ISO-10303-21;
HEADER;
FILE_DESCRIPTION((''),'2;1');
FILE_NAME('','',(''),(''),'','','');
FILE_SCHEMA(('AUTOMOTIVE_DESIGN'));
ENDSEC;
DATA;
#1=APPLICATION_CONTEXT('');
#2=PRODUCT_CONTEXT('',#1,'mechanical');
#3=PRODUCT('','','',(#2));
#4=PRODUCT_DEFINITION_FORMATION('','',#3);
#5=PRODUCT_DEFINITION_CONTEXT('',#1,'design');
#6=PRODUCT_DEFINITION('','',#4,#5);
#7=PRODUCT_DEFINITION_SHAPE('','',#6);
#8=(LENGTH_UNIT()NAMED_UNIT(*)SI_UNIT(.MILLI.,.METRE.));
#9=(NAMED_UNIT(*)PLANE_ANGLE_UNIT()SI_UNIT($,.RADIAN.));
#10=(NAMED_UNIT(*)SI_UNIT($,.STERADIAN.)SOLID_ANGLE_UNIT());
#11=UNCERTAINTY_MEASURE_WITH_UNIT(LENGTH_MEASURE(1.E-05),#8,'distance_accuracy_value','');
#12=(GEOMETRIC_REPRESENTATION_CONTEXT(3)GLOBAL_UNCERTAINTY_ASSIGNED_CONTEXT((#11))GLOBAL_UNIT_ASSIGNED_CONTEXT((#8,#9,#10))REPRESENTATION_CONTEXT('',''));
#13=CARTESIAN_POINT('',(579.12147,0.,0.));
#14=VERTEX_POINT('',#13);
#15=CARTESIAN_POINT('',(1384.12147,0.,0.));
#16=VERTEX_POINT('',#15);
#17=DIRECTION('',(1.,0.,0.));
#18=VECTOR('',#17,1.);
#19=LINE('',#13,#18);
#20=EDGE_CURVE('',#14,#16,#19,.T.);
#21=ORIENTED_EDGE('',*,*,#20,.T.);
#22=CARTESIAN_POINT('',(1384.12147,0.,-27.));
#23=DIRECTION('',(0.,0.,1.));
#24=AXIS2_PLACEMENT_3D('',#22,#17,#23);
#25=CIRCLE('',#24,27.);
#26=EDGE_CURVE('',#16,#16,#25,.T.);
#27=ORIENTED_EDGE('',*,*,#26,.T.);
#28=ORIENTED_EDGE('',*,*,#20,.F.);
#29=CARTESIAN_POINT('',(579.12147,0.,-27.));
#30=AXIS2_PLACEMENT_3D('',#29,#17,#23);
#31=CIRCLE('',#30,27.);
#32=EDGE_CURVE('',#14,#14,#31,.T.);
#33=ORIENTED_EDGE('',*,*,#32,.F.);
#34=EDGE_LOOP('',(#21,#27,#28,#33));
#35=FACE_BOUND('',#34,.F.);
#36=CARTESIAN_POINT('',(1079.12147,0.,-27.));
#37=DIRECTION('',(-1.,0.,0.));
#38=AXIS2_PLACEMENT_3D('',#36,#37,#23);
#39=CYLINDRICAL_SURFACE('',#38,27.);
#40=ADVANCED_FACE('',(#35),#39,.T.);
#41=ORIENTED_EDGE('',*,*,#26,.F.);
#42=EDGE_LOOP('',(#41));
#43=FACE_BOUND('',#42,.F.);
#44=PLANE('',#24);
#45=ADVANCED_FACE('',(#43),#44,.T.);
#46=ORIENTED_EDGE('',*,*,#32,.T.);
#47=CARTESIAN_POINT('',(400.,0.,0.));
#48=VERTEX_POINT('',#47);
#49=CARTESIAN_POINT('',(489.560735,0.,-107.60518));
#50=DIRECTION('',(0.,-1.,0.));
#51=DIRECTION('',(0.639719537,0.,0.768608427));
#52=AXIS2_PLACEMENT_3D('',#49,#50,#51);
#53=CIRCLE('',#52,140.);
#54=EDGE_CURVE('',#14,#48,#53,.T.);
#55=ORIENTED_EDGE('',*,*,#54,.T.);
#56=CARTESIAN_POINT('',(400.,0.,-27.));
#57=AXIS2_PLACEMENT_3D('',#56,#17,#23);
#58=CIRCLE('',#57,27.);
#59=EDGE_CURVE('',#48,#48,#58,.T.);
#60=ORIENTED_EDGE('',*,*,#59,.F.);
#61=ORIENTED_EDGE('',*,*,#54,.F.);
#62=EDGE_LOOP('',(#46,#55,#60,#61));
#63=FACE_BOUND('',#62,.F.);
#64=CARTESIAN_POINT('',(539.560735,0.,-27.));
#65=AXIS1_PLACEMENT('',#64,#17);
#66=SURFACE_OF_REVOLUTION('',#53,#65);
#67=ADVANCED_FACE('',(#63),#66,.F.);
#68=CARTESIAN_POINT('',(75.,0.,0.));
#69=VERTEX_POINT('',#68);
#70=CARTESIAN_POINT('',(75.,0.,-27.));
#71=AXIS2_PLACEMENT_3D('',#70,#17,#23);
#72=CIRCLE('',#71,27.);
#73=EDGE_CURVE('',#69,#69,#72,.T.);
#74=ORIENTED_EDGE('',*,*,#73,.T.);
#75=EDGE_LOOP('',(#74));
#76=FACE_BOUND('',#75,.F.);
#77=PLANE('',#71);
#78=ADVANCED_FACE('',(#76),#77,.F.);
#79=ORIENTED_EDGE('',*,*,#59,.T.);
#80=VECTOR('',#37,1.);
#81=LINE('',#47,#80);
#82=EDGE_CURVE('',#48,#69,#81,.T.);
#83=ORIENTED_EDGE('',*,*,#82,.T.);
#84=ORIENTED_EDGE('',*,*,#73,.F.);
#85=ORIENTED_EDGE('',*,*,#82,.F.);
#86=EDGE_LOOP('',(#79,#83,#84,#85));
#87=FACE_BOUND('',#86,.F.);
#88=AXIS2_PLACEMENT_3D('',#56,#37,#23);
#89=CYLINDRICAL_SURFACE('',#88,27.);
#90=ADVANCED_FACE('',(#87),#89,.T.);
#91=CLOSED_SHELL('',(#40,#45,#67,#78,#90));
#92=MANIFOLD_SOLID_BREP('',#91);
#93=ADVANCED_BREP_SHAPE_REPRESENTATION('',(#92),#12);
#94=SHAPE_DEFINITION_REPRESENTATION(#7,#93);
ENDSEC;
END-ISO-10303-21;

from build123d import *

# Parameters (mm, degrees)
F2_DEPTH = 305
F3_DEPTH = 75


with BuildPart() as f1:
    # F0 (on Front) → F1 (revolve)
    with BuildSketch(Plane.XZ):
        with BuildLine():
            Line((400, 0), (0, 0))
            Line((0, 0), (0, -27))
            Line((0, -27), (1079.1214704514, -27))
            Line((1079.1214704514, -27), (1079.1214704514, 0))
            Line((1079.1214704514, 0), (579.1214704514, 0))
            ThreePointArc((579.1214704514, 0), (489.5607352257, 32.3948202648), (400, 0))
        make_face()
    revolve(axis=Axis((539.5607352257, 0, -27), (1, 0, 0)))

    # F2 (add): a face of the model
    f2_faces = [f1.faces().sort_by_distance(p)[0] for p in [
        (1079.1214704514, 0, -27),
    ]]
    extrude(f2_faces, amount=F2_DEPTH)

    # F3 (cut): a face of the model
    f3_faces = [f1.faces().sort_by_distance(p)[0] for p in [
        (0, 0, -27),
    ]]
    extrude(f3_faces, amount=-F3_DEPTH, mode=Mode.SUBTRACT)


solid = f1.part
